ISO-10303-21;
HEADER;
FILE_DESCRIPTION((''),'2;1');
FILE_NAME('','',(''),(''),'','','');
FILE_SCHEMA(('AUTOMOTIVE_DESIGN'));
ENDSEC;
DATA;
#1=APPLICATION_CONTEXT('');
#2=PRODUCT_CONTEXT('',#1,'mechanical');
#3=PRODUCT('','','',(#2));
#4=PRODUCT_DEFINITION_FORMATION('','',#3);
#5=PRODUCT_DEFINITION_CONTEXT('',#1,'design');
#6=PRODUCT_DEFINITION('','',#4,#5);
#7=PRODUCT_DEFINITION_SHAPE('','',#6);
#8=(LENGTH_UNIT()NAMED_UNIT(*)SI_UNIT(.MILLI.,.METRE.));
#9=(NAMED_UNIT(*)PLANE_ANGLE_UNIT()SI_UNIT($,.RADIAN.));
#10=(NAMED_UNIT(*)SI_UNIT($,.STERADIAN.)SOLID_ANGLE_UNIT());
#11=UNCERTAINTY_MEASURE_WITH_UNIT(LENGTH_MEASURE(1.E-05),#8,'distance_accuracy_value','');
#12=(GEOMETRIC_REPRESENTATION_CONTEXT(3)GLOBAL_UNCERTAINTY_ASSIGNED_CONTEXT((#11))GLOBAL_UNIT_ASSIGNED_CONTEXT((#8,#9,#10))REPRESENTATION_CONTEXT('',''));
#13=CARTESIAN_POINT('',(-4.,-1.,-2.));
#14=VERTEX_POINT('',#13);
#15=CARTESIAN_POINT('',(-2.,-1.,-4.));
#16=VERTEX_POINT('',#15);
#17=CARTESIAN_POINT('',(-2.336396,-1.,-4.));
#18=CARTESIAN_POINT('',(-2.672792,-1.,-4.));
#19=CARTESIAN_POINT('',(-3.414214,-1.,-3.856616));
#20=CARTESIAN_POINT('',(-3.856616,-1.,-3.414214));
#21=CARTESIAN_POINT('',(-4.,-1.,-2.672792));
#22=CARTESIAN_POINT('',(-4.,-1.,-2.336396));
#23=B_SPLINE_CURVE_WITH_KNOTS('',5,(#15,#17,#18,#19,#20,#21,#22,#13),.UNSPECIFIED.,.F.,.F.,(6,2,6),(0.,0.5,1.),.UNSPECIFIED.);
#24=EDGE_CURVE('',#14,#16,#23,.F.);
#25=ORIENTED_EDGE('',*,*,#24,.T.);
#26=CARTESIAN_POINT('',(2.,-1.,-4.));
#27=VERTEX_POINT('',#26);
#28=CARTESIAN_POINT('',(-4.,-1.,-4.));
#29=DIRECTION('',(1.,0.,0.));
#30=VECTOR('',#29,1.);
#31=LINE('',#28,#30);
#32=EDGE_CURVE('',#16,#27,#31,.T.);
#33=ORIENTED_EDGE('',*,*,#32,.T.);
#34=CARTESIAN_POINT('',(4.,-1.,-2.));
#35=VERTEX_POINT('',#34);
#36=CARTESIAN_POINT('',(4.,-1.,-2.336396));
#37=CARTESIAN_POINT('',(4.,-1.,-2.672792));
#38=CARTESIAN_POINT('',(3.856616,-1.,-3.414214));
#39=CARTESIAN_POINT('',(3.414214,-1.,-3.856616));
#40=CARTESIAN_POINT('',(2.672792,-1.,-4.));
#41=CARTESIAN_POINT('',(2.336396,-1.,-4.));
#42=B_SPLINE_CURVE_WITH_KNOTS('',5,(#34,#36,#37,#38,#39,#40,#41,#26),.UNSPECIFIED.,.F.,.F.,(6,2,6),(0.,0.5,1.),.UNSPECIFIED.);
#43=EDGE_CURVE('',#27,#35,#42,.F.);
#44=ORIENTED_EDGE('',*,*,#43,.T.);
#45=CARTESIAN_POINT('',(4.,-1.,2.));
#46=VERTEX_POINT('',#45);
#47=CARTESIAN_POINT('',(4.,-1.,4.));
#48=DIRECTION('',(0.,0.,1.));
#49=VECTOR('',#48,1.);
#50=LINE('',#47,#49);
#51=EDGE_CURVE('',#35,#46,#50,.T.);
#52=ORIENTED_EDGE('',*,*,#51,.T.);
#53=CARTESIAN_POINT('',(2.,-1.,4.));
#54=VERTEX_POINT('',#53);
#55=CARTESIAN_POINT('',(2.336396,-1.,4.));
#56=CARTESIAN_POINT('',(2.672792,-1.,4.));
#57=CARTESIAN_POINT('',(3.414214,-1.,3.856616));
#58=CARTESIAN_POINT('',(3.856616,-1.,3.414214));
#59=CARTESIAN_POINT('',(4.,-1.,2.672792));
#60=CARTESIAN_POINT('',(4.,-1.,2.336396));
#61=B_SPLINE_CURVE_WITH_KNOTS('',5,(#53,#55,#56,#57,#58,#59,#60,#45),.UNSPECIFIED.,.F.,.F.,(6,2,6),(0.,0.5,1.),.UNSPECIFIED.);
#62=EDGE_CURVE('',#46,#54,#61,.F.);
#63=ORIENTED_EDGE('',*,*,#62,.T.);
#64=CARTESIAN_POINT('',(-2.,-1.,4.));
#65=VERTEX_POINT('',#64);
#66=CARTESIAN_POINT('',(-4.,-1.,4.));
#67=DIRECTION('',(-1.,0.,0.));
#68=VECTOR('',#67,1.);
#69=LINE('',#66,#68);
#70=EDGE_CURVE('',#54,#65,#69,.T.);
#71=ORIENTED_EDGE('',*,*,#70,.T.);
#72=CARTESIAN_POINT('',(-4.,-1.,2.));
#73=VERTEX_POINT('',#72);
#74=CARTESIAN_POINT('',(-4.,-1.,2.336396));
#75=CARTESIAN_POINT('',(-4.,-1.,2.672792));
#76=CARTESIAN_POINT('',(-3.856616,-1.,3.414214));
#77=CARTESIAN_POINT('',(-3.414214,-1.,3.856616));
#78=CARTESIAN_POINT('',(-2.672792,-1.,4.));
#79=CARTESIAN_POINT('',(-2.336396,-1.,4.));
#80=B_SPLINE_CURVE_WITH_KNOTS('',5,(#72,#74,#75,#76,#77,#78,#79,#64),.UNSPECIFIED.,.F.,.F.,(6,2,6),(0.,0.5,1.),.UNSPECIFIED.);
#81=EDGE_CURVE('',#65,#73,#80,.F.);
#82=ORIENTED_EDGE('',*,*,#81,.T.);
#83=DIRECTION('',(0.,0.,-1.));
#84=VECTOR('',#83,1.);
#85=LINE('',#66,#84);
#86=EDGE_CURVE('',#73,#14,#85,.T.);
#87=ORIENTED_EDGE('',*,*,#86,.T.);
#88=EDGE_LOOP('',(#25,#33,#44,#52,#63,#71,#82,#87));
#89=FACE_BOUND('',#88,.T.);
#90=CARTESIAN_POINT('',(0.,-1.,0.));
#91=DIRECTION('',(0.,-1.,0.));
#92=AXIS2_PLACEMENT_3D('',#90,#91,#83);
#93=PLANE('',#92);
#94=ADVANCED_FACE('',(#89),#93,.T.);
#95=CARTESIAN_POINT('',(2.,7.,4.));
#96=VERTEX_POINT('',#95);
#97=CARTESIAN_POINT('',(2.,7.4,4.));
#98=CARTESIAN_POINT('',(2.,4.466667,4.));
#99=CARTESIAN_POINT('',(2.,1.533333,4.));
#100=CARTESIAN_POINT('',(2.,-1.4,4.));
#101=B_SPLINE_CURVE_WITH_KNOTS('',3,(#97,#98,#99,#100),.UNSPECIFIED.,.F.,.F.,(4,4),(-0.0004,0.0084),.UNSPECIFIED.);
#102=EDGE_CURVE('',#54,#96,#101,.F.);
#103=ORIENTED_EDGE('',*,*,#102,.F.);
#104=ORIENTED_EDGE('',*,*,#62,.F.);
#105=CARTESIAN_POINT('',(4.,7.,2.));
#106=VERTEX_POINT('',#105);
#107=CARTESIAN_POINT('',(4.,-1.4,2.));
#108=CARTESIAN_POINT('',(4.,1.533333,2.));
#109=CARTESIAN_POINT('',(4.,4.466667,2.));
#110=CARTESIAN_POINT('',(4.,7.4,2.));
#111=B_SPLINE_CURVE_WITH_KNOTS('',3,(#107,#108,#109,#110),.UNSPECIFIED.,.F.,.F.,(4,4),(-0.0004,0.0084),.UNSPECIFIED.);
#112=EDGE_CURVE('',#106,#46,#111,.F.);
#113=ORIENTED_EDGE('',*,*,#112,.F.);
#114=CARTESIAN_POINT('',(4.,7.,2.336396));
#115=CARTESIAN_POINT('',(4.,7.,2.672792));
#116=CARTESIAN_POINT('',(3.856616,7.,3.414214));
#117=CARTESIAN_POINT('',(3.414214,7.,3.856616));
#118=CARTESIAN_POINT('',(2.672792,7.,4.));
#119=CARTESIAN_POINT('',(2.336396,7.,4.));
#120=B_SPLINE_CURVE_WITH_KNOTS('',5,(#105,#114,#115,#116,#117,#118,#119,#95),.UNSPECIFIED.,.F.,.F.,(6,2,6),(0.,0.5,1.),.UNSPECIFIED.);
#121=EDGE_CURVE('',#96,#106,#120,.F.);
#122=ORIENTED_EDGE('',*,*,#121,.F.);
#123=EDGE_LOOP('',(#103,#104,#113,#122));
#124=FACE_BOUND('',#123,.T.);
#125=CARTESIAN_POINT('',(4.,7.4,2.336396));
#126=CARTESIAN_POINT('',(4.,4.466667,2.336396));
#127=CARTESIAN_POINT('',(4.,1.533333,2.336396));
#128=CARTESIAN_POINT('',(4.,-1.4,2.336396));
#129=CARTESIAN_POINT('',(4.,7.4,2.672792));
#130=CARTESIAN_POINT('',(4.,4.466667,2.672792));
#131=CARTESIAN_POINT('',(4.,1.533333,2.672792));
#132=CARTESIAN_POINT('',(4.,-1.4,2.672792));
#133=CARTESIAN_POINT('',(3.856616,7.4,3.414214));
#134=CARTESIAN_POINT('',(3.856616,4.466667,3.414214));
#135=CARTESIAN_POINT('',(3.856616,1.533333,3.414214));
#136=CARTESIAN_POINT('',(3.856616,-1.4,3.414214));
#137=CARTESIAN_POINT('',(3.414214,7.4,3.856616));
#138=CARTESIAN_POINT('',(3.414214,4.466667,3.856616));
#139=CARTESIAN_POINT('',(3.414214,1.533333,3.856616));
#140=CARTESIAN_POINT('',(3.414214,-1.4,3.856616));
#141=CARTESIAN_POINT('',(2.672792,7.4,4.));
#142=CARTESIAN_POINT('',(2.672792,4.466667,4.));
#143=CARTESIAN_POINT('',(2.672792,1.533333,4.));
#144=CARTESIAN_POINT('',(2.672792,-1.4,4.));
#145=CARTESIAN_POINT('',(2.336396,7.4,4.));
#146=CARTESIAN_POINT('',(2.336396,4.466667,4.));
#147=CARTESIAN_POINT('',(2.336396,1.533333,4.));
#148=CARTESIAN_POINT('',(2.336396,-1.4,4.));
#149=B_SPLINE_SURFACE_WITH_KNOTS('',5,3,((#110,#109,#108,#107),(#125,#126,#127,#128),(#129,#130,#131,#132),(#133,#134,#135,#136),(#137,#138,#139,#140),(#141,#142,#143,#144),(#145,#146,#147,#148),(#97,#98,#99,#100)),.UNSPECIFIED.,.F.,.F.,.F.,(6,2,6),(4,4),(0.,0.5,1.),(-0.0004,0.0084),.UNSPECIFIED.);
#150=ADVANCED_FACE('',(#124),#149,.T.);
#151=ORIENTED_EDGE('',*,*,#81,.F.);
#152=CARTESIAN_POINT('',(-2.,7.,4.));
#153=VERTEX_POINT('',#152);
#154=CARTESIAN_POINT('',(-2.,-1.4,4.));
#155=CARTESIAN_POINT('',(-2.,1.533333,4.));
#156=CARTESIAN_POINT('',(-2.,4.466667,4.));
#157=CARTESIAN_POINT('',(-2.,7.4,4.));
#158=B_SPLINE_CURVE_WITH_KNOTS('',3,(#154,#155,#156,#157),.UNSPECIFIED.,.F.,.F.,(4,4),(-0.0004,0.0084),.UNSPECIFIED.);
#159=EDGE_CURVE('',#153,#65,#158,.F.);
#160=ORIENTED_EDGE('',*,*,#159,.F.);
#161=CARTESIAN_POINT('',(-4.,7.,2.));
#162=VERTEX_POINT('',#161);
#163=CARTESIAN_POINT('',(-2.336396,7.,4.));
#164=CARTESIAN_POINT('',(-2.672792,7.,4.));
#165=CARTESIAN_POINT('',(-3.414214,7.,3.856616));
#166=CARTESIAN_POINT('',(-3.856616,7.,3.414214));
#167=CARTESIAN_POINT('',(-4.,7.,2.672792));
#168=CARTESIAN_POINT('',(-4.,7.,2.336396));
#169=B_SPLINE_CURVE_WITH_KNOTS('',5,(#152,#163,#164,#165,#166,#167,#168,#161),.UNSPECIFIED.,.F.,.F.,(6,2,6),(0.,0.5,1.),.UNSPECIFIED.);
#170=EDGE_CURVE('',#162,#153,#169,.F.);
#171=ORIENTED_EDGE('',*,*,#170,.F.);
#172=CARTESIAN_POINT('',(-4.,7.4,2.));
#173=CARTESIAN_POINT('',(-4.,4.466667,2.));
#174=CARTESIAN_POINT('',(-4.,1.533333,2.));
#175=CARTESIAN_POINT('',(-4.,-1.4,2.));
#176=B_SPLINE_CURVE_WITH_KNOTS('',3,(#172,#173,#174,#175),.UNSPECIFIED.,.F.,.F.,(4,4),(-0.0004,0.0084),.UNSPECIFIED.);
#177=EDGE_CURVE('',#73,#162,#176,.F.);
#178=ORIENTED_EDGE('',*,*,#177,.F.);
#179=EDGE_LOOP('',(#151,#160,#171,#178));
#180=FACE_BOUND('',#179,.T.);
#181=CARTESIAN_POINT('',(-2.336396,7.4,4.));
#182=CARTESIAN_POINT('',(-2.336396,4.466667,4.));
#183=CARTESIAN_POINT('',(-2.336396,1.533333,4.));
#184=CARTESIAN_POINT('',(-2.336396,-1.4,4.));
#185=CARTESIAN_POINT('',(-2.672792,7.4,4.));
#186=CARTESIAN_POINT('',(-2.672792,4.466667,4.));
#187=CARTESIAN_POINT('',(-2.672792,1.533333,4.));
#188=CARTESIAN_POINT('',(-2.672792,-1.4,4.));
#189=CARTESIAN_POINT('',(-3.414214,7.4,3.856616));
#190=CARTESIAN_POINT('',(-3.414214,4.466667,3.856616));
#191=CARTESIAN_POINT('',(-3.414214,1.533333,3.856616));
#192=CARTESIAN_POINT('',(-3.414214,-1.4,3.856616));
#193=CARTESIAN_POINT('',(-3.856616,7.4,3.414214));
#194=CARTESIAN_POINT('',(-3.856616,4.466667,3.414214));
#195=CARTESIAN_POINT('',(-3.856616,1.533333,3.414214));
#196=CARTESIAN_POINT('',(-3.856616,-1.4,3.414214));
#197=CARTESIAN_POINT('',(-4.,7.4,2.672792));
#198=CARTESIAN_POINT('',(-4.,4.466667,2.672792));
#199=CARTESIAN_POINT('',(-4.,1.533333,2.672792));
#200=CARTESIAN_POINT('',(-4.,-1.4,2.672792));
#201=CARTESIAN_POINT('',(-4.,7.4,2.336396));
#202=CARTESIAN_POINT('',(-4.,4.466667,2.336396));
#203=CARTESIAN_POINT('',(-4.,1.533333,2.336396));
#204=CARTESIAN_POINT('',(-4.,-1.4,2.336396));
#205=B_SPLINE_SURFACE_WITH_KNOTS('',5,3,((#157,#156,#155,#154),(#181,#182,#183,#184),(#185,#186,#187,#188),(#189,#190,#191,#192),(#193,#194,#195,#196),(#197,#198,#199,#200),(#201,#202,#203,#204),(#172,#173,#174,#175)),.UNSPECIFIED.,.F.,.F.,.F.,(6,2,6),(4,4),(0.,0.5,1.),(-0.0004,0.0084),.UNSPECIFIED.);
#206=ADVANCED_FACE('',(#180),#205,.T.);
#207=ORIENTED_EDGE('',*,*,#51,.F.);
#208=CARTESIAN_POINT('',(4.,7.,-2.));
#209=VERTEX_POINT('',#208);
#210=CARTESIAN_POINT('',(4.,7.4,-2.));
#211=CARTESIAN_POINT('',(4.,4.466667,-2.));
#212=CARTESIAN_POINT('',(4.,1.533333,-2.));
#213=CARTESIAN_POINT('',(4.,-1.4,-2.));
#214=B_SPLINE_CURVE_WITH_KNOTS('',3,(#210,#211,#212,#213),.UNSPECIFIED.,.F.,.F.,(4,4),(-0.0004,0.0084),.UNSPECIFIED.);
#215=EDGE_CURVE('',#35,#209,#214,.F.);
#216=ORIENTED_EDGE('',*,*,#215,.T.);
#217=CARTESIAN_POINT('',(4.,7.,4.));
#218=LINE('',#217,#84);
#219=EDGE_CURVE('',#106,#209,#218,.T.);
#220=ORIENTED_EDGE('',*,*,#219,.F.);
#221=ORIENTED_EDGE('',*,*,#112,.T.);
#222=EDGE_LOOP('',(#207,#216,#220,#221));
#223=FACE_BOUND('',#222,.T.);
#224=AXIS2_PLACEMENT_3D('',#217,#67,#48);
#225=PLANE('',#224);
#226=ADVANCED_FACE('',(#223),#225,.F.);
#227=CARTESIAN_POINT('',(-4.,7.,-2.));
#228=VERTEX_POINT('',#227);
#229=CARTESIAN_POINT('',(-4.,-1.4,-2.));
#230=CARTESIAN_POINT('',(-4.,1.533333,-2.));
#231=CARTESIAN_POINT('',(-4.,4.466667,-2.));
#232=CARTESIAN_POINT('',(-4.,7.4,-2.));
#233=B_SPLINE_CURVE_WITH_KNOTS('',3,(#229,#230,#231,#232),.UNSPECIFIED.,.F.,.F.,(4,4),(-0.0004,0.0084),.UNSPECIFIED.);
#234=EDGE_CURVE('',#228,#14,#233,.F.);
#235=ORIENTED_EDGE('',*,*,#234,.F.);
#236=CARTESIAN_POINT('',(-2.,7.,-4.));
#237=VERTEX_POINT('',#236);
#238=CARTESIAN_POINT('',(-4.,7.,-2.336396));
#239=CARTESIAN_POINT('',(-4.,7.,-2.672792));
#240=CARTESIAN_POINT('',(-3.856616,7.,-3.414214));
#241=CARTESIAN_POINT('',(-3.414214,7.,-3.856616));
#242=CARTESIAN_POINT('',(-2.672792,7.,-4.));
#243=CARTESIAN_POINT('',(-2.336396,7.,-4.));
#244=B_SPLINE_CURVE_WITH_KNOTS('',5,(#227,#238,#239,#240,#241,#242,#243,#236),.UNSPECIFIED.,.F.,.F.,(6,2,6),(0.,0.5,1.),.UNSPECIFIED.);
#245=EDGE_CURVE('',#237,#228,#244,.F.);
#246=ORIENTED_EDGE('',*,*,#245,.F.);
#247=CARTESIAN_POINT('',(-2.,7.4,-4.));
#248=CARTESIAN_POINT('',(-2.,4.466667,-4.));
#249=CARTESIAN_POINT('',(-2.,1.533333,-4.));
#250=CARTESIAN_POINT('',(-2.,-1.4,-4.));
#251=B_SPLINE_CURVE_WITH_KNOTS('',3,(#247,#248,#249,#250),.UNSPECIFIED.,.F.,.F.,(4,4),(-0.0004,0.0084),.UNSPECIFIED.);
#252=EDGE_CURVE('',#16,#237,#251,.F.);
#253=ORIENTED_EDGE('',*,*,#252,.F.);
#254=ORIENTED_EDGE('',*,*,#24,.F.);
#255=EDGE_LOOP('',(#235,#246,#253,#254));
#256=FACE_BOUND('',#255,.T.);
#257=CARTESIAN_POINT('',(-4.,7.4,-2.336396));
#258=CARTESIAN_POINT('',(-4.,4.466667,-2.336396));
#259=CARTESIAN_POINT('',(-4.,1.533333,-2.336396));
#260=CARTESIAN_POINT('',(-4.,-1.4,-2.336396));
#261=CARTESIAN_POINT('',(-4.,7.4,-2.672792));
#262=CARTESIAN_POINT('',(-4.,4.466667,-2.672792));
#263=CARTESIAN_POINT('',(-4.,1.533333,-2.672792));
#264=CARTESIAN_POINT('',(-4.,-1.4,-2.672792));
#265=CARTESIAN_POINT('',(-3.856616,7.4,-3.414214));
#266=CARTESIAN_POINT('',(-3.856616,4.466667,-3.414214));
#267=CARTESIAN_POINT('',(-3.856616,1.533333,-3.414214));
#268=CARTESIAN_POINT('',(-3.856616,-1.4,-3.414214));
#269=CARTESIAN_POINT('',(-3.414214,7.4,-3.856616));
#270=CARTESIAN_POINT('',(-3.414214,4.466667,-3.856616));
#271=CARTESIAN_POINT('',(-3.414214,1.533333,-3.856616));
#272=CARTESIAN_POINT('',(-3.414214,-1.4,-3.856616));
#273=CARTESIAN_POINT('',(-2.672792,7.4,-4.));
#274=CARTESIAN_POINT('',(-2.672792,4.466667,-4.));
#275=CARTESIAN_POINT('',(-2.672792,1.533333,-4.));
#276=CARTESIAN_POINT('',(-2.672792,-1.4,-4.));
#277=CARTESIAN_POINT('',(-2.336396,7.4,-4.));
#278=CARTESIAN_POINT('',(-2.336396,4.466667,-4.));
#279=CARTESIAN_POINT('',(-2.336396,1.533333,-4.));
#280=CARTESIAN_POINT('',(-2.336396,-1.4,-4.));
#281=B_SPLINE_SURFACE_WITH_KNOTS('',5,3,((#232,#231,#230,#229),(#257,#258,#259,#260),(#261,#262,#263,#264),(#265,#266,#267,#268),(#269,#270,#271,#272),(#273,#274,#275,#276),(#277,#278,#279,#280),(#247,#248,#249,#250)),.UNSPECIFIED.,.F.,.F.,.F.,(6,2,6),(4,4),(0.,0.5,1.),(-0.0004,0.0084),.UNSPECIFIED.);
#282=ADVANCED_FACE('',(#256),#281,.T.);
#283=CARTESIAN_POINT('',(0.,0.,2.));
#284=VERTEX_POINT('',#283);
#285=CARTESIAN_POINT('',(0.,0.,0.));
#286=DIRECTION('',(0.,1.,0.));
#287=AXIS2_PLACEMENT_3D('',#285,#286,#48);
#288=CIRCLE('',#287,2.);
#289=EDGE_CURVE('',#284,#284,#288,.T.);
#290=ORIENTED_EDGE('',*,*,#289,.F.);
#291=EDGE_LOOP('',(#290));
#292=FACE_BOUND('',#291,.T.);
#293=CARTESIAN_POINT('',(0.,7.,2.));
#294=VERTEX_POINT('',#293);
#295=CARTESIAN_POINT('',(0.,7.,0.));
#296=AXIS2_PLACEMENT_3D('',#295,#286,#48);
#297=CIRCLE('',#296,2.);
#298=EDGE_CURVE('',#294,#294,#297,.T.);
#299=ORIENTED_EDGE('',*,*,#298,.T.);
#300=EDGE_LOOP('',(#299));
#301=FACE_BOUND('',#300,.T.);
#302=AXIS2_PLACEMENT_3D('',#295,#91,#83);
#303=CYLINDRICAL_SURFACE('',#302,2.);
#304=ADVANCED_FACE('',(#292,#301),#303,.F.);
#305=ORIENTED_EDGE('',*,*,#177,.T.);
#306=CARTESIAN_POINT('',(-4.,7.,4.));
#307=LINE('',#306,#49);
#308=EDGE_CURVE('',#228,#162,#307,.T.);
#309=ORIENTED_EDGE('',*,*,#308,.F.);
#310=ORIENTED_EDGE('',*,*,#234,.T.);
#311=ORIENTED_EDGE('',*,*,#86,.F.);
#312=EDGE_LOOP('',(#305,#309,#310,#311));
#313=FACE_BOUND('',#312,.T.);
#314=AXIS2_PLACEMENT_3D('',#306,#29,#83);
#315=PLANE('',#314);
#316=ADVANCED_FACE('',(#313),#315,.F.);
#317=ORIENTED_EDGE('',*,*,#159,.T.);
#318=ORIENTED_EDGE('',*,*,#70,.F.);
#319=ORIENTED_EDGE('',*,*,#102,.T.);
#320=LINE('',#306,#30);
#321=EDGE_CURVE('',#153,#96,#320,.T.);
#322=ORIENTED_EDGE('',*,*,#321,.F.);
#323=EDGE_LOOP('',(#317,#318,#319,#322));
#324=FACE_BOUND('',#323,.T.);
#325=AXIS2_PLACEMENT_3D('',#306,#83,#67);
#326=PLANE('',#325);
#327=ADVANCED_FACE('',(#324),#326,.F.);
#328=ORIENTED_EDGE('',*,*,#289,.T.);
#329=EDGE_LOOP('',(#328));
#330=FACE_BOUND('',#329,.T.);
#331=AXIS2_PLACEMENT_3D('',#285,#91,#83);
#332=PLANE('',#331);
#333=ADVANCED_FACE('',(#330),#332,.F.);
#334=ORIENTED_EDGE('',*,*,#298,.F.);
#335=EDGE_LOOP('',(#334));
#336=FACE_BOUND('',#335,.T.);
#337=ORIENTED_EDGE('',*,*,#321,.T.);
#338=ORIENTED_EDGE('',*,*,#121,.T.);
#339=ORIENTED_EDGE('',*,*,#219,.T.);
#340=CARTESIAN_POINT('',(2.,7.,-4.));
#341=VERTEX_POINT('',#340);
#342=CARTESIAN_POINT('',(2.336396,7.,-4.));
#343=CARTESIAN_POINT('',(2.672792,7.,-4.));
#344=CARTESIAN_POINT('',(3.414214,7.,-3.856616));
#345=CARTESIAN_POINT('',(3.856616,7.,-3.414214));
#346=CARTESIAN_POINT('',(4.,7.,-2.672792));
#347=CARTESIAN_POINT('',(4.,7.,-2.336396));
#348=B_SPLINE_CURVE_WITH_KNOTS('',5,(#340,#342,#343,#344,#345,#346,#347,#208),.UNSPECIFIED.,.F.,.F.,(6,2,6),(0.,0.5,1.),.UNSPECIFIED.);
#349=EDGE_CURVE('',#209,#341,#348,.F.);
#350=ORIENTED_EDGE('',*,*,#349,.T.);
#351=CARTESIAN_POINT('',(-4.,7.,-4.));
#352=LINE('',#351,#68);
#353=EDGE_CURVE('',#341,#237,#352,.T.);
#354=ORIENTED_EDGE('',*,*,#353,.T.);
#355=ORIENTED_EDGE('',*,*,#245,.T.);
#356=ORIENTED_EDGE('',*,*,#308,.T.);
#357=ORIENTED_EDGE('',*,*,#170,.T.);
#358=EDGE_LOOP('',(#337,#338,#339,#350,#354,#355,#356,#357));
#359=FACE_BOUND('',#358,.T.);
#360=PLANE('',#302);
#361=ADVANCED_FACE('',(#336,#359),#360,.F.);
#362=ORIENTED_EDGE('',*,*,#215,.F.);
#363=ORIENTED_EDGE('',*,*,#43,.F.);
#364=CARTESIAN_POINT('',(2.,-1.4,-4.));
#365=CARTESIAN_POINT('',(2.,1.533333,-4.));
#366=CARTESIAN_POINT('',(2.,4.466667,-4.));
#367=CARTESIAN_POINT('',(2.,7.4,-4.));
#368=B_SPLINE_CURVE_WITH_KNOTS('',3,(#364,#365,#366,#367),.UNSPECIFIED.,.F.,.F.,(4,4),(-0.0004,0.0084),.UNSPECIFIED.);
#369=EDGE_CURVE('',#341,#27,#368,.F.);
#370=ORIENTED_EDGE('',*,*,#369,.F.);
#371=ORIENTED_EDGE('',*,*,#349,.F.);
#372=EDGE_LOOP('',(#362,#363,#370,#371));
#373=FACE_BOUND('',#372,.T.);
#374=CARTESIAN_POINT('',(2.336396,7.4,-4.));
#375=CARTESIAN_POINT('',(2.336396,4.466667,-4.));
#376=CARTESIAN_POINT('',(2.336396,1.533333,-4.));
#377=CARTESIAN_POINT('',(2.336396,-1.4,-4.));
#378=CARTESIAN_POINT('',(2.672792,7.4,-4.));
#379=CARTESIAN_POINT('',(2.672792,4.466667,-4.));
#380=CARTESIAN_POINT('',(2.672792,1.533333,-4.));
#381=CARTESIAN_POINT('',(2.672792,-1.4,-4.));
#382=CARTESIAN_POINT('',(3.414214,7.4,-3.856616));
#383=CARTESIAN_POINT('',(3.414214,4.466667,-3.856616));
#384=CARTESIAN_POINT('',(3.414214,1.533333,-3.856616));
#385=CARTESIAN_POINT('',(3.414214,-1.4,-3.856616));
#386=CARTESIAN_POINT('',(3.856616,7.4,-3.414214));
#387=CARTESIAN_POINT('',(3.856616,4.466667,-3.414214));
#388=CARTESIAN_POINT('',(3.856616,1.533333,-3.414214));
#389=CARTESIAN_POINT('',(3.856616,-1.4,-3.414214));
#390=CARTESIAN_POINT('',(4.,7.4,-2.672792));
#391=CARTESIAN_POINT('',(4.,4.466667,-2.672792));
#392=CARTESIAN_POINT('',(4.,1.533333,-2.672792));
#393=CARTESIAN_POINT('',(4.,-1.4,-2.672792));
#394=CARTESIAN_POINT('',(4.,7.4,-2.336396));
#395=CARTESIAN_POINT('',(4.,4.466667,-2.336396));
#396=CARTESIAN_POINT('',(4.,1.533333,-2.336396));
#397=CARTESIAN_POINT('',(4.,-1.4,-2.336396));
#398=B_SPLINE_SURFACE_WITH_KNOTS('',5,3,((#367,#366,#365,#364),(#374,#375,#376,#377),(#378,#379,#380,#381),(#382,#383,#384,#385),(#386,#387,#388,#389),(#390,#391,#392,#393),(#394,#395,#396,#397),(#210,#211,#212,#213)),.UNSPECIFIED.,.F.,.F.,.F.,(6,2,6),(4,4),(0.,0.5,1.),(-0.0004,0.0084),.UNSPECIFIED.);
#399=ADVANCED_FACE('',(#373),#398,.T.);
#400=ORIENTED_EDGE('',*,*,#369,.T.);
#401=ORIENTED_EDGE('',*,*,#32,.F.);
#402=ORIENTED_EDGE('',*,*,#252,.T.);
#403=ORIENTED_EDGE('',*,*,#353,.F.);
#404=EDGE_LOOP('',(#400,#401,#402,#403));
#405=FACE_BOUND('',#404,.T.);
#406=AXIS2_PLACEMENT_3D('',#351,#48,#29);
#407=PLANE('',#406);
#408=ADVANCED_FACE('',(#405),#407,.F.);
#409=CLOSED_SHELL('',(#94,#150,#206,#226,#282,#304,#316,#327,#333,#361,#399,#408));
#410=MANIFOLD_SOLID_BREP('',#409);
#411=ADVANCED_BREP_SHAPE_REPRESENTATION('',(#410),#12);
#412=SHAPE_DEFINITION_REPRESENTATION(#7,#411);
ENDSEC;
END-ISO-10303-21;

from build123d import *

# Parameters (mm, degrees)
SKETCH2_W           = 8
SKETCH2_H           = 8
SKETCH2_R           = 2
BOSS_EXTRUDE1_DEPTH = 7
SKETCH3_W           = 8
SKETCH3_H           = 8
BOSS_EXTRUDE2_DEPTH = 1
FILLET1_SIZE        = 2


with BuildPart() as part:
    # Sketch2 → Boss-Extrude1 (new body)
    with BuildSketch(Plane(origin=(0, 0, 0), x_dir=(1, 0, 0), z_dir=(0, 1, 0))):
        Rectangle(SKETCH2_W, SKETCH2_H)
        with Locations(Location((0, 0, 0), (0, 0, 270))):
            Circle(SKETCH2_R, mode=Mode.SUBTRACT)
    extrude(amount=BOSS_EXTRUDE1_DEPTH)

    # Sketch3 → Boss-Extrude2 (add)
    with BuildSketch(Plane.XZ):
        Rectangle(SKETCH3_W, SKETCH3_H)
    extrude(amount=BOSS_EXTRUDE2_DEPTH)

    # Fillet1
    # a fillet whose section is not a circle: 2 mm, written as the material it takes off along each edge
    with BuildSketch(Plane(origin=(4, -6, 4), x_dir=(-1, 0, 0), z_dir=(0, 1, 0)), Plane(origin=(-4, 12, 4), x_dir=(1, 0, 0), z_dir=(0, -1, 0))) as fillet1_piece_1:
        with BuildLine():
            add(Edge.make_bspline([(FILLET1_SIZE, 0), (FILLET1_SIZE * 0.831801948466, 0), (FILLET1_SIZE * 0.663603896932, 0), (FILLET1_SIZE * 0.292893218813, -FILLET1_SIZE * 0.0716919198361), (FILLET1_SIZE * 0.0716919198361, -FILLET1_SIZE * 0.292893218813), (0, -FILLET1_SIZE * 0.663603896932), (0, -FILLET1_SIZE * 0.831801948466), (0, -FILLET1_SIZE)], knots=[0, 0, 0, 0, 0, 0, 0.5, 0.5, 1, 1, 1, 1, 1, 1], degree=5))
            Line((0, -FILLET1_SIZE), (0, 0))
            Line((0, 0), (FILLET1_SIZE, 0))
        make_face()
    extrude(amount=18, mode=Mode.SUBTRACT)
    with BuildSketch(Plane(origin=(-4, 12, -4), x_dir=(1, 0, 0), z_dir=(0, -1, 0)), Plane(origin=(4, -6, -4), x_dir=(-1, 0, 0), z_dir=(0, 1, 0))) as fillet1_piece_2:
        with BuildLine():
            add(Edge.make_bspline([(FILLET1_SIZE, 0), (FILLET1_SIZE * 0.831801948466, 0), (FILLET1_SIZE * 0.663603896932, 0), (FILLET1_SIZE * 0.292893218813, FILLET1_SIZE * 0.0716919198361), (FILLET1_SIZE * 0.0716919198361, FILLET1_SIZE * 0.292893218813), (0, FILLET1_SIZE * 0.663603896932), (0, FILLET1_SIZE * 0.831801948466), (0, FILLET1_SIZE)], knots=[0, 0, 0, 0, 0, 0, 0.5, 0.5, 1, 1, 1, 1, 1, 1], degree=5))
            Line((0, FILLET1_SIZE), (0, 0))
            Line((0, 0), (FILLET1_SIZE, 0))
        make_face()
    extrude(amount=18, mode=Mode.SUBTRACT)


solid = part.part
